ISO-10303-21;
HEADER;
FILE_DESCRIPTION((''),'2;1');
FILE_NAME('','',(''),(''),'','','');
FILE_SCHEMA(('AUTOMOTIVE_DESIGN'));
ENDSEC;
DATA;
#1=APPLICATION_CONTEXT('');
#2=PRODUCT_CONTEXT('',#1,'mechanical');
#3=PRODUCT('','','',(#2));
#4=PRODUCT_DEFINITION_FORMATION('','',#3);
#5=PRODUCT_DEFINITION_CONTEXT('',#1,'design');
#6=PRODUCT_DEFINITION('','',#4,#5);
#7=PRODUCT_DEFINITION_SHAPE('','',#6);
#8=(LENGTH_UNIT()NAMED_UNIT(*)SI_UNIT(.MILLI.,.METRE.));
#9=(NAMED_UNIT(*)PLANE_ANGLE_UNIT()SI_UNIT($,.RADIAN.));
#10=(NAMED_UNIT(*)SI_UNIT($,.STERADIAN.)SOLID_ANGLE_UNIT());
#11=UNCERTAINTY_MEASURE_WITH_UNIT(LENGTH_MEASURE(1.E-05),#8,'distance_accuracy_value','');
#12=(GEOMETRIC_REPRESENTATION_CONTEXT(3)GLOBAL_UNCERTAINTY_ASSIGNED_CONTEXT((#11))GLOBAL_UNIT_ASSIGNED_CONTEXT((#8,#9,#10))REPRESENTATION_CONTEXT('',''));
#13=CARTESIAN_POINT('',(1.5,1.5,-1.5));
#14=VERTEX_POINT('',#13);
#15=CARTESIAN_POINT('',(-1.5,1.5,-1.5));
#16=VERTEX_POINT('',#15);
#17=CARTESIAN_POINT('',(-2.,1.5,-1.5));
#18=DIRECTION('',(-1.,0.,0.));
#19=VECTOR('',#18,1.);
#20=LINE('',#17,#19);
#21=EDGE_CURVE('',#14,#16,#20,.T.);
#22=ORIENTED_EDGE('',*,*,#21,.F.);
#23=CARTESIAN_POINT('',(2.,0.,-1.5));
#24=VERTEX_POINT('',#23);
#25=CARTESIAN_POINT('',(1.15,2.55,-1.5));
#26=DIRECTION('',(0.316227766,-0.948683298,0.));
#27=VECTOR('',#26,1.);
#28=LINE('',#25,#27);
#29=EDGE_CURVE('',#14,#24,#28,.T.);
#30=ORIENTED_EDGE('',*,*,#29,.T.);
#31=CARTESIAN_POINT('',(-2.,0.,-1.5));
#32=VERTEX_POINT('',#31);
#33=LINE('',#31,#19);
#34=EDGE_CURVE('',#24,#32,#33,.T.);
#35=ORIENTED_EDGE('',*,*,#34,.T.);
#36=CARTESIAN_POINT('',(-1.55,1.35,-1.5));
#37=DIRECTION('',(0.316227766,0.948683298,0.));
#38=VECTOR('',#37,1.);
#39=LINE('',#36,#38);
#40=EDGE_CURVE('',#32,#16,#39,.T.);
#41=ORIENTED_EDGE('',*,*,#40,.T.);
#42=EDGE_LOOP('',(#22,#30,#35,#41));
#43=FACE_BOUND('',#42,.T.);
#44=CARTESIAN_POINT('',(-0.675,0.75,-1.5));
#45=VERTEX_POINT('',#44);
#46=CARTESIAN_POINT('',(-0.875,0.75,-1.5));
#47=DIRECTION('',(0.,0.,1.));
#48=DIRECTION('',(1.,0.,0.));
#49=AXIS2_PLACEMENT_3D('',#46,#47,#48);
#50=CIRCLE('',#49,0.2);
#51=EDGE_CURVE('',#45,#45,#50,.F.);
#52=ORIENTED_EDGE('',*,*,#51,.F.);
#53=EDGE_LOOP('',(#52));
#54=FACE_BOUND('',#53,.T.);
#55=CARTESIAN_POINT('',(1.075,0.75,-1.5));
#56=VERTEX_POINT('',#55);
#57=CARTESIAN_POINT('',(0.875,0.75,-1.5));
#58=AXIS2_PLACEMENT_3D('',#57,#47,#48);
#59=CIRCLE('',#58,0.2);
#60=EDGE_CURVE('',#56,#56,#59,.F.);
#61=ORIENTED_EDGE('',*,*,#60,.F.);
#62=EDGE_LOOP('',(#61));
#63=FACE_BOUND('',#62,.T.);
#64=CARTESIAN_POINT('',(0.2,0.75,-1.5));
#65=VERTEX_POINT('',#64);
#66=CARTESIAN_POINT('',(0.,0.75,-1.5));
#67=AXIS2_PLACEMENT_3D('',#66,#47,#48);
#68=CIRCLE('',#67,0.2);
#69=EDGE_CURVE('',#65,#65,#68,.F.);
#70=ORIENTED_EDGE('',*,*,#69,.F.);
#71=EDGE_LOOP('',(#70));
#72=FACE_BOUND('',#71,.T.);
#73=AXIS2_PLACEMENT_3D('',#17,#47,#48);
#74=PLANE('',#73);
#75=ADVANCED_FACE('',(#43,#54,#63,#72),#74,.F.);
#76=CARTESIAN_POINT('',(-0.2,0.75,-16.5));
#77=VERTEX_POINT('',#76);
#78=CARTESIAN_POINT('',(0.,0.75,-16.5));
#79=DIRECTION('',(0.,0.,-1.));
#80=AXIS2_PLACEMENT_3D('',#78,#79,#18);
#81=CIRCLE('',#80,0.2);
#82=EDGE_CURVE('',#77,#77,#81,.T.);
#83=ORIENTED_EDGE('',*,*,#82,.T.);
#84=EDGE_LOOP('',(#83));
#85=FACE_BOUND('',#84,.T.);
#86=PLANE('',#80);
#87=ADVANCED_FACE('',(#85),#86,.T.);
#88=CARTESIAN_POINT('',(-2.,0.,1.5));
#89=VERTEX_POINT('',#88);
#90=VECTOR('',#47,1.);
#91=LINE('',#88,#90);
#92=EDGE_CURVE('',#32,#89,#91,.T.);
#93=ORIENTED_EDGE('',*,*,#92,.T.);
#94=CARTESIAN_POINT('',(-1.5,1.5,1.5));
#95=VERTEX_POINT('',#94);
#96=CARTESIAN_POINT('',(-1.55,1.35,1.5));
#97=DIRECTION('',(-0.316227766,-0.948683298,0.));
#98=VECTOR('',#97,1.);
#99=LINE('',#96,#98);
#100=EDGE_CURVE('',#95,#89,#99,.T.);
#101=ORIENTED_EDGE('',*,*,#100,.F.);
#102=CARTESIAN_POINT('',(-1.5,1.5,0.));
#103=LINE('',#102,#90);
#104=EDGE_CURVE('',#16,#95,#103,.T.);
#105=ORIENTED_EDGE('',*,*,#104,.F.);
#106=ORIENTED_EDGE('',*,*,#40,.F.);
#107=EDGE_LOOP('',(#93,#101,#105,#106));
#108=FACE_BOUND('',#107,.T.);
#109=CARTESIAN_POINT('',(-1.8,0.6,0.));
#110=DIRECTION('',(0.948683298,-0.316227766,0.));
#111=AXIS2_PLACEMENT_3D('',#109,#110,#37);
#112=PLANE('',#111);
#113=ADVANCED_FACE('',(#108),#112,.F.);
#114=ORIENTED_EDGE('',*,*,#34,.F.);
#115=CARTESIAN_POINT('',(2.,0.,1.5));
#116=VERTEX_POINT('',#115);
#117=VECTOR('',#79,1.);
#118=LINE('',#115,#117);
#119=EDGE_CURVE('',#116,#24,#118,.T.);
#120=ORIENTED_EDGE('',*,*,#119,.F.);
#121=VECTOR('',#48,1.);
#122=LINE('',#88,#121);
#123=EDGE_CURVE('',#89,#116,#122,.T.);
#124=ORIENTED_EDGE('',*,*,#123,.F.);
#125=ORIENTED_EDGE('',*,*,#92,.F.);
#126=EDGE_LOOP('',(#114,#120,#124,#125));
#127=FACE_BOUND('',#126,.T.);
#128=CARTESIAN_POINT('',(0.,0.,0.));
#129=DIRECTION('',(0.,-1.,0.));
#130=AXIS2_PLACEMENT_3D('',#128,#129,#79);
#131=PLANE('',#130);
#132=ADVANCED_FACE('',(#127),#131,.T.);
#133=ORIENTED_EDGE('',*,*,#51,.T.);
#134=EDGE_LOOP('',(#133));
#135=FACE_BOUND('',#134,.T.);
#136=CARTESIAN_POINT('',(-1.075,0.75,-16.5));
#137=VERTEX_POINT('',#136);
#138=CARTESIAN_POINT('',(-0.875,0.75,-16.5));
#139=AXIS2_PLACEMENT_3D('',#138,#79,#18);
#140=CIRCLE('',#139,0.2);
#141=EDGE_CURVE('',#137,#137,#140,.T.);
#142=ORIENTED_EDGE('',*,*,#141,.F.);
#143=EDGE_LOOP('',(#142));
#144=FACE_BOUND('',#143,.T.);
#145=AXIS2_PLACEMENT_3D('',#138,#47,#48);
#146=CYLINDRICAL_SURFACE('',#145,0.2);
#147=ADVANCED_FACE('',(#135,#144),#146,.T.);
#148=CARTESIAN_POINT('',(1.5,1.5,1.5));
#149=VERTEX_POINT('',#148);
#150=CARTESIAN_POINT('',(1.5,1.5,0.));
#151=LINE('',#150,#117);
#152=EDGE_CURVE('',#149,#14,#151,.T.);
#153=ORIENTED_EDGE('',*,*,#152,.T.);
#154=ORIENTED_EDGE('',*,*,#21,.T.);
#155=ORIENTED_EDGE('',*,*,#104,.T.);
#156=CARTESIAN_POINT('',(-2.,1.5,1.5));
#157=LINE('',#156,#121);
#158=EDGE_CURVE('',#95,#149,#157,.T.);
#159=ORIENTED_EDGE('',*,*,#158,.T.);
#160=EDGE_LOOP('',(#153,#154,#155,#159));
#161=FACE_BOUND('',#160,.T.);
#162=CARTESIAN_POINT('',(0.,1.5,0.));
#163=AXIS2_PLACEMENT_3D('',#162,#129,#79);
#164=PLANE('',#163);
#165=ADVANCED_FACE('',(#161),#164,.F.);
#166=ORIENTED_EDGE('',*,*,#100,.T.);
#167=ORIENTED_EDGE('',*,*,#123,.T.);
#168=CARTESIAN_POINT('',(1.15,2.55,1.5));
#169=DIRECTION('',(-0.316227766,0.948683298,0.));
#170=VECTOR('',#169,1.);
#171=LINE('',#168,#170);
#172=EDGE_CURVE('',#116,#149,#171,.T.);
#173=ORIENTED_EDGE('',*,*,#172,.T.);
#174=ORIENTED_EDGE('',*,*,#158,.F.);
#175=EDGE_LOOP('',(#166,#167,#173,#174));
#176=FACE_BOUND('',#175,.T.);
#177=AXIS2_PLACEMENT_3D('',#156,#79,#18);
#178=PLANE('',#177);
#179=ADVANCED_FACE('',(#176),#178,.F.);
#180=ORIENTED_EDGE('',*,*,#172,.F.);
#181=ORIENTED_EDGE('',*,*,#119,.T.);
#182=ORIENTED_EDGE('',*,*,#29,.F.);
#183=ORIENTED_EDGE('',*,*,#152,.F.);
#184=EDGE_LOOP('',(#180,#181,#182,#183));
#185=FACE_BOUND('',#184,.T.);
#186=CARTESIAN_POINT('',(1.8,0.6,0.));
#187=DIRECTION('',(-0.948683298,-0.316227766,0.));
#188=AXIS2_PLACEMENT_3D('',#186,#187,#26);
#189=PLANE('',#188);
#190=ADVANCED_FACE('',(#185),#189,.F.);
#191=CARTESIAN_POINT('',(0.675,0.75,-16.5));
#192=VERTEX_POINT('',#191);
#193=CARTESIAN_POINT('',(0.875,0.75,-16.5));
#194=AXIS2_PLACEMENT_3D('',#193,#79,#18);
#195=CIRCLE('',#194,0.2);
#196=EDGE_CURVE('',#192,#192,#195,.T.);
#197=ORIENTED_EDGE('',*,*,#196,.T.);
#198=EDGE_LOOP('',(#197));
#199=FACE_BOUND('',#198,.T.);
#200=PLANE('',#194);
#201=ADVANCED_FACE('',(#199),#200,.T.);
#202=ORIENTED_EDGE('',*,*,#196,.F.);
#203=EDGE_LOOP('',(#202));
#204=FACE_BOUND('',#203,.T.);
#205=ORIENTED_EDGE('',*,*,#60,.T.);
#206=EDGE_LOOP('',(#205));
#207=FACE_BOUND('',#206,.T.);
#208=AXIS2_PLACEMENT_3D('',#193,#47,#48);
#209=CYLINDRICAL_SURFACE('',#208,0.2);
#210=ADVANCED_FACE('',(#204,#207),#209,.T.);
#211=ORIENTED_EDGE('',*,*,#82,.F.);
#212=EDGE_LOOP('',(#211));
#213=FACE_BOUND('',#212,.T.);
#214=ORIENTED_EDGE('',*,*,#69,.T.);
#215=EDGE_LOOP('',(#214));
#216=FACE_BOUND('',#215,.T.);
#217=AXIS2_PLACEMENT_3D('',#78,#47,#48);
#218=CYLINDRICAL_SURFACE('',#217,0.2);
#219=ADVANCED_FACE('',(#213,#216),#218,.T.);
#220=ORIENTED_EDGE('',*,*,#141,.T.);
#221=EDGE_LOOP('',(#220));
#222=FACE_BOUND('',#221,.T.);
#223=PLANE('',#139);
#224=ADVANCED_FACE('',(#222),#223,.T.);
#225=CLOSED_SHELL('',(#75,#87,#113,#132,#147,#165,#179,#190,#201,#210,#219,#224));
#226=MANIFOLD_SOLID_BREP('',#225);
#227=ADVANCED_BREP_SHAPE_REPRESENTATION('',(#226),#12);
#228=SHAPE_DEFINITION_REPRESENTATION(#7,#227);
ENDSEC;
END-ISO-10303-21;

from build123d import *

# Parameters (mm, degrees)
SKETCH1_W           = 4
SKETCH1_H           = 3
BOSS_EXTRUDE1_DEPTH = 1.5
SPLIT1_START        = -1.5
SPLIT1_DEPTH        = 3
SPLIT1_2_DEPTH      = 3
SPLIT1_3_DEPTH      = 3
SKETCH5_R           = 0.2
BOSS_EXTRUDE2_DEPTH = 15


# Read off the part's stored shape, not the designer's step: Split1
with BuildPart() as part:
    # Sketch1 → Boss-Extrude1 (new body)
    with BuildSketch(Plane(origin=(0, 0, 0), x_dir=(1, 0, 0), z_dir=(0, 1, 0))):
        Rectangle(SKETCH1_W, SKETCH1_H)
    extrude(amount=BOSS_EXTRUDE1_DEPTH)

    # Split1 outline → Split1 (cut)
    with BuildSketch(Plane.XY.offset(SPLIT1_START)):
        Polygon((-2, 1.5), (-2, 0), (-1.5, 1.5), align=None)
        Polygon((2, 1.5), (1.5, 1.5), (2, 0), align=None)
    extrude(amount=SPLIT1_DEPTH, mode=Mode.SUBTRACT)

    # Sketch5 → Boss-Extrude2 (add)
    with BuildSketch(Plane(origin=(0, 0, -1.5), x_dir=(-1, 0, 0), z_dir=(0, 0, -1))):
        with Locations(Location((0, 0.75, 0), (0, 0, 180))):
            Circle(SKETCH5_R)
        with Locations(Location((-0.875, 0.75, 0), (0, 0, 180))):
            Circle(SKETCH5_R)
        with Locations(Location((0.875, 0.75, 0), (0, 0, 180))):
            Circle(SKETCH5_R)
    extrude(amount=BOSS_EXTRUDE2_DEPTH)


with BuildPart() as body_2:
    # Split1 2 outline → Split1 2 (new body)
    with BuildSketch(Plane.XY.offset(SPLIT1_START)):
        Polygon((-2, 1.5), (-2, 0), (-1.5, 1.5), align=None)
    extrude(amount=SPLIT1_2_DEPTH)


with BuildPart() as body_3:
    # Split1 3 outline → Split1 3 (new body)
    with BuildSketch(Plane.XY.offset(SPLIT1_START)):
        Polygon((2, 1.5), (1.5, 1.5), (2, 0), align=None)
    extrude(amount=SPLIT1_3_DEPTH)


solid = part.part
